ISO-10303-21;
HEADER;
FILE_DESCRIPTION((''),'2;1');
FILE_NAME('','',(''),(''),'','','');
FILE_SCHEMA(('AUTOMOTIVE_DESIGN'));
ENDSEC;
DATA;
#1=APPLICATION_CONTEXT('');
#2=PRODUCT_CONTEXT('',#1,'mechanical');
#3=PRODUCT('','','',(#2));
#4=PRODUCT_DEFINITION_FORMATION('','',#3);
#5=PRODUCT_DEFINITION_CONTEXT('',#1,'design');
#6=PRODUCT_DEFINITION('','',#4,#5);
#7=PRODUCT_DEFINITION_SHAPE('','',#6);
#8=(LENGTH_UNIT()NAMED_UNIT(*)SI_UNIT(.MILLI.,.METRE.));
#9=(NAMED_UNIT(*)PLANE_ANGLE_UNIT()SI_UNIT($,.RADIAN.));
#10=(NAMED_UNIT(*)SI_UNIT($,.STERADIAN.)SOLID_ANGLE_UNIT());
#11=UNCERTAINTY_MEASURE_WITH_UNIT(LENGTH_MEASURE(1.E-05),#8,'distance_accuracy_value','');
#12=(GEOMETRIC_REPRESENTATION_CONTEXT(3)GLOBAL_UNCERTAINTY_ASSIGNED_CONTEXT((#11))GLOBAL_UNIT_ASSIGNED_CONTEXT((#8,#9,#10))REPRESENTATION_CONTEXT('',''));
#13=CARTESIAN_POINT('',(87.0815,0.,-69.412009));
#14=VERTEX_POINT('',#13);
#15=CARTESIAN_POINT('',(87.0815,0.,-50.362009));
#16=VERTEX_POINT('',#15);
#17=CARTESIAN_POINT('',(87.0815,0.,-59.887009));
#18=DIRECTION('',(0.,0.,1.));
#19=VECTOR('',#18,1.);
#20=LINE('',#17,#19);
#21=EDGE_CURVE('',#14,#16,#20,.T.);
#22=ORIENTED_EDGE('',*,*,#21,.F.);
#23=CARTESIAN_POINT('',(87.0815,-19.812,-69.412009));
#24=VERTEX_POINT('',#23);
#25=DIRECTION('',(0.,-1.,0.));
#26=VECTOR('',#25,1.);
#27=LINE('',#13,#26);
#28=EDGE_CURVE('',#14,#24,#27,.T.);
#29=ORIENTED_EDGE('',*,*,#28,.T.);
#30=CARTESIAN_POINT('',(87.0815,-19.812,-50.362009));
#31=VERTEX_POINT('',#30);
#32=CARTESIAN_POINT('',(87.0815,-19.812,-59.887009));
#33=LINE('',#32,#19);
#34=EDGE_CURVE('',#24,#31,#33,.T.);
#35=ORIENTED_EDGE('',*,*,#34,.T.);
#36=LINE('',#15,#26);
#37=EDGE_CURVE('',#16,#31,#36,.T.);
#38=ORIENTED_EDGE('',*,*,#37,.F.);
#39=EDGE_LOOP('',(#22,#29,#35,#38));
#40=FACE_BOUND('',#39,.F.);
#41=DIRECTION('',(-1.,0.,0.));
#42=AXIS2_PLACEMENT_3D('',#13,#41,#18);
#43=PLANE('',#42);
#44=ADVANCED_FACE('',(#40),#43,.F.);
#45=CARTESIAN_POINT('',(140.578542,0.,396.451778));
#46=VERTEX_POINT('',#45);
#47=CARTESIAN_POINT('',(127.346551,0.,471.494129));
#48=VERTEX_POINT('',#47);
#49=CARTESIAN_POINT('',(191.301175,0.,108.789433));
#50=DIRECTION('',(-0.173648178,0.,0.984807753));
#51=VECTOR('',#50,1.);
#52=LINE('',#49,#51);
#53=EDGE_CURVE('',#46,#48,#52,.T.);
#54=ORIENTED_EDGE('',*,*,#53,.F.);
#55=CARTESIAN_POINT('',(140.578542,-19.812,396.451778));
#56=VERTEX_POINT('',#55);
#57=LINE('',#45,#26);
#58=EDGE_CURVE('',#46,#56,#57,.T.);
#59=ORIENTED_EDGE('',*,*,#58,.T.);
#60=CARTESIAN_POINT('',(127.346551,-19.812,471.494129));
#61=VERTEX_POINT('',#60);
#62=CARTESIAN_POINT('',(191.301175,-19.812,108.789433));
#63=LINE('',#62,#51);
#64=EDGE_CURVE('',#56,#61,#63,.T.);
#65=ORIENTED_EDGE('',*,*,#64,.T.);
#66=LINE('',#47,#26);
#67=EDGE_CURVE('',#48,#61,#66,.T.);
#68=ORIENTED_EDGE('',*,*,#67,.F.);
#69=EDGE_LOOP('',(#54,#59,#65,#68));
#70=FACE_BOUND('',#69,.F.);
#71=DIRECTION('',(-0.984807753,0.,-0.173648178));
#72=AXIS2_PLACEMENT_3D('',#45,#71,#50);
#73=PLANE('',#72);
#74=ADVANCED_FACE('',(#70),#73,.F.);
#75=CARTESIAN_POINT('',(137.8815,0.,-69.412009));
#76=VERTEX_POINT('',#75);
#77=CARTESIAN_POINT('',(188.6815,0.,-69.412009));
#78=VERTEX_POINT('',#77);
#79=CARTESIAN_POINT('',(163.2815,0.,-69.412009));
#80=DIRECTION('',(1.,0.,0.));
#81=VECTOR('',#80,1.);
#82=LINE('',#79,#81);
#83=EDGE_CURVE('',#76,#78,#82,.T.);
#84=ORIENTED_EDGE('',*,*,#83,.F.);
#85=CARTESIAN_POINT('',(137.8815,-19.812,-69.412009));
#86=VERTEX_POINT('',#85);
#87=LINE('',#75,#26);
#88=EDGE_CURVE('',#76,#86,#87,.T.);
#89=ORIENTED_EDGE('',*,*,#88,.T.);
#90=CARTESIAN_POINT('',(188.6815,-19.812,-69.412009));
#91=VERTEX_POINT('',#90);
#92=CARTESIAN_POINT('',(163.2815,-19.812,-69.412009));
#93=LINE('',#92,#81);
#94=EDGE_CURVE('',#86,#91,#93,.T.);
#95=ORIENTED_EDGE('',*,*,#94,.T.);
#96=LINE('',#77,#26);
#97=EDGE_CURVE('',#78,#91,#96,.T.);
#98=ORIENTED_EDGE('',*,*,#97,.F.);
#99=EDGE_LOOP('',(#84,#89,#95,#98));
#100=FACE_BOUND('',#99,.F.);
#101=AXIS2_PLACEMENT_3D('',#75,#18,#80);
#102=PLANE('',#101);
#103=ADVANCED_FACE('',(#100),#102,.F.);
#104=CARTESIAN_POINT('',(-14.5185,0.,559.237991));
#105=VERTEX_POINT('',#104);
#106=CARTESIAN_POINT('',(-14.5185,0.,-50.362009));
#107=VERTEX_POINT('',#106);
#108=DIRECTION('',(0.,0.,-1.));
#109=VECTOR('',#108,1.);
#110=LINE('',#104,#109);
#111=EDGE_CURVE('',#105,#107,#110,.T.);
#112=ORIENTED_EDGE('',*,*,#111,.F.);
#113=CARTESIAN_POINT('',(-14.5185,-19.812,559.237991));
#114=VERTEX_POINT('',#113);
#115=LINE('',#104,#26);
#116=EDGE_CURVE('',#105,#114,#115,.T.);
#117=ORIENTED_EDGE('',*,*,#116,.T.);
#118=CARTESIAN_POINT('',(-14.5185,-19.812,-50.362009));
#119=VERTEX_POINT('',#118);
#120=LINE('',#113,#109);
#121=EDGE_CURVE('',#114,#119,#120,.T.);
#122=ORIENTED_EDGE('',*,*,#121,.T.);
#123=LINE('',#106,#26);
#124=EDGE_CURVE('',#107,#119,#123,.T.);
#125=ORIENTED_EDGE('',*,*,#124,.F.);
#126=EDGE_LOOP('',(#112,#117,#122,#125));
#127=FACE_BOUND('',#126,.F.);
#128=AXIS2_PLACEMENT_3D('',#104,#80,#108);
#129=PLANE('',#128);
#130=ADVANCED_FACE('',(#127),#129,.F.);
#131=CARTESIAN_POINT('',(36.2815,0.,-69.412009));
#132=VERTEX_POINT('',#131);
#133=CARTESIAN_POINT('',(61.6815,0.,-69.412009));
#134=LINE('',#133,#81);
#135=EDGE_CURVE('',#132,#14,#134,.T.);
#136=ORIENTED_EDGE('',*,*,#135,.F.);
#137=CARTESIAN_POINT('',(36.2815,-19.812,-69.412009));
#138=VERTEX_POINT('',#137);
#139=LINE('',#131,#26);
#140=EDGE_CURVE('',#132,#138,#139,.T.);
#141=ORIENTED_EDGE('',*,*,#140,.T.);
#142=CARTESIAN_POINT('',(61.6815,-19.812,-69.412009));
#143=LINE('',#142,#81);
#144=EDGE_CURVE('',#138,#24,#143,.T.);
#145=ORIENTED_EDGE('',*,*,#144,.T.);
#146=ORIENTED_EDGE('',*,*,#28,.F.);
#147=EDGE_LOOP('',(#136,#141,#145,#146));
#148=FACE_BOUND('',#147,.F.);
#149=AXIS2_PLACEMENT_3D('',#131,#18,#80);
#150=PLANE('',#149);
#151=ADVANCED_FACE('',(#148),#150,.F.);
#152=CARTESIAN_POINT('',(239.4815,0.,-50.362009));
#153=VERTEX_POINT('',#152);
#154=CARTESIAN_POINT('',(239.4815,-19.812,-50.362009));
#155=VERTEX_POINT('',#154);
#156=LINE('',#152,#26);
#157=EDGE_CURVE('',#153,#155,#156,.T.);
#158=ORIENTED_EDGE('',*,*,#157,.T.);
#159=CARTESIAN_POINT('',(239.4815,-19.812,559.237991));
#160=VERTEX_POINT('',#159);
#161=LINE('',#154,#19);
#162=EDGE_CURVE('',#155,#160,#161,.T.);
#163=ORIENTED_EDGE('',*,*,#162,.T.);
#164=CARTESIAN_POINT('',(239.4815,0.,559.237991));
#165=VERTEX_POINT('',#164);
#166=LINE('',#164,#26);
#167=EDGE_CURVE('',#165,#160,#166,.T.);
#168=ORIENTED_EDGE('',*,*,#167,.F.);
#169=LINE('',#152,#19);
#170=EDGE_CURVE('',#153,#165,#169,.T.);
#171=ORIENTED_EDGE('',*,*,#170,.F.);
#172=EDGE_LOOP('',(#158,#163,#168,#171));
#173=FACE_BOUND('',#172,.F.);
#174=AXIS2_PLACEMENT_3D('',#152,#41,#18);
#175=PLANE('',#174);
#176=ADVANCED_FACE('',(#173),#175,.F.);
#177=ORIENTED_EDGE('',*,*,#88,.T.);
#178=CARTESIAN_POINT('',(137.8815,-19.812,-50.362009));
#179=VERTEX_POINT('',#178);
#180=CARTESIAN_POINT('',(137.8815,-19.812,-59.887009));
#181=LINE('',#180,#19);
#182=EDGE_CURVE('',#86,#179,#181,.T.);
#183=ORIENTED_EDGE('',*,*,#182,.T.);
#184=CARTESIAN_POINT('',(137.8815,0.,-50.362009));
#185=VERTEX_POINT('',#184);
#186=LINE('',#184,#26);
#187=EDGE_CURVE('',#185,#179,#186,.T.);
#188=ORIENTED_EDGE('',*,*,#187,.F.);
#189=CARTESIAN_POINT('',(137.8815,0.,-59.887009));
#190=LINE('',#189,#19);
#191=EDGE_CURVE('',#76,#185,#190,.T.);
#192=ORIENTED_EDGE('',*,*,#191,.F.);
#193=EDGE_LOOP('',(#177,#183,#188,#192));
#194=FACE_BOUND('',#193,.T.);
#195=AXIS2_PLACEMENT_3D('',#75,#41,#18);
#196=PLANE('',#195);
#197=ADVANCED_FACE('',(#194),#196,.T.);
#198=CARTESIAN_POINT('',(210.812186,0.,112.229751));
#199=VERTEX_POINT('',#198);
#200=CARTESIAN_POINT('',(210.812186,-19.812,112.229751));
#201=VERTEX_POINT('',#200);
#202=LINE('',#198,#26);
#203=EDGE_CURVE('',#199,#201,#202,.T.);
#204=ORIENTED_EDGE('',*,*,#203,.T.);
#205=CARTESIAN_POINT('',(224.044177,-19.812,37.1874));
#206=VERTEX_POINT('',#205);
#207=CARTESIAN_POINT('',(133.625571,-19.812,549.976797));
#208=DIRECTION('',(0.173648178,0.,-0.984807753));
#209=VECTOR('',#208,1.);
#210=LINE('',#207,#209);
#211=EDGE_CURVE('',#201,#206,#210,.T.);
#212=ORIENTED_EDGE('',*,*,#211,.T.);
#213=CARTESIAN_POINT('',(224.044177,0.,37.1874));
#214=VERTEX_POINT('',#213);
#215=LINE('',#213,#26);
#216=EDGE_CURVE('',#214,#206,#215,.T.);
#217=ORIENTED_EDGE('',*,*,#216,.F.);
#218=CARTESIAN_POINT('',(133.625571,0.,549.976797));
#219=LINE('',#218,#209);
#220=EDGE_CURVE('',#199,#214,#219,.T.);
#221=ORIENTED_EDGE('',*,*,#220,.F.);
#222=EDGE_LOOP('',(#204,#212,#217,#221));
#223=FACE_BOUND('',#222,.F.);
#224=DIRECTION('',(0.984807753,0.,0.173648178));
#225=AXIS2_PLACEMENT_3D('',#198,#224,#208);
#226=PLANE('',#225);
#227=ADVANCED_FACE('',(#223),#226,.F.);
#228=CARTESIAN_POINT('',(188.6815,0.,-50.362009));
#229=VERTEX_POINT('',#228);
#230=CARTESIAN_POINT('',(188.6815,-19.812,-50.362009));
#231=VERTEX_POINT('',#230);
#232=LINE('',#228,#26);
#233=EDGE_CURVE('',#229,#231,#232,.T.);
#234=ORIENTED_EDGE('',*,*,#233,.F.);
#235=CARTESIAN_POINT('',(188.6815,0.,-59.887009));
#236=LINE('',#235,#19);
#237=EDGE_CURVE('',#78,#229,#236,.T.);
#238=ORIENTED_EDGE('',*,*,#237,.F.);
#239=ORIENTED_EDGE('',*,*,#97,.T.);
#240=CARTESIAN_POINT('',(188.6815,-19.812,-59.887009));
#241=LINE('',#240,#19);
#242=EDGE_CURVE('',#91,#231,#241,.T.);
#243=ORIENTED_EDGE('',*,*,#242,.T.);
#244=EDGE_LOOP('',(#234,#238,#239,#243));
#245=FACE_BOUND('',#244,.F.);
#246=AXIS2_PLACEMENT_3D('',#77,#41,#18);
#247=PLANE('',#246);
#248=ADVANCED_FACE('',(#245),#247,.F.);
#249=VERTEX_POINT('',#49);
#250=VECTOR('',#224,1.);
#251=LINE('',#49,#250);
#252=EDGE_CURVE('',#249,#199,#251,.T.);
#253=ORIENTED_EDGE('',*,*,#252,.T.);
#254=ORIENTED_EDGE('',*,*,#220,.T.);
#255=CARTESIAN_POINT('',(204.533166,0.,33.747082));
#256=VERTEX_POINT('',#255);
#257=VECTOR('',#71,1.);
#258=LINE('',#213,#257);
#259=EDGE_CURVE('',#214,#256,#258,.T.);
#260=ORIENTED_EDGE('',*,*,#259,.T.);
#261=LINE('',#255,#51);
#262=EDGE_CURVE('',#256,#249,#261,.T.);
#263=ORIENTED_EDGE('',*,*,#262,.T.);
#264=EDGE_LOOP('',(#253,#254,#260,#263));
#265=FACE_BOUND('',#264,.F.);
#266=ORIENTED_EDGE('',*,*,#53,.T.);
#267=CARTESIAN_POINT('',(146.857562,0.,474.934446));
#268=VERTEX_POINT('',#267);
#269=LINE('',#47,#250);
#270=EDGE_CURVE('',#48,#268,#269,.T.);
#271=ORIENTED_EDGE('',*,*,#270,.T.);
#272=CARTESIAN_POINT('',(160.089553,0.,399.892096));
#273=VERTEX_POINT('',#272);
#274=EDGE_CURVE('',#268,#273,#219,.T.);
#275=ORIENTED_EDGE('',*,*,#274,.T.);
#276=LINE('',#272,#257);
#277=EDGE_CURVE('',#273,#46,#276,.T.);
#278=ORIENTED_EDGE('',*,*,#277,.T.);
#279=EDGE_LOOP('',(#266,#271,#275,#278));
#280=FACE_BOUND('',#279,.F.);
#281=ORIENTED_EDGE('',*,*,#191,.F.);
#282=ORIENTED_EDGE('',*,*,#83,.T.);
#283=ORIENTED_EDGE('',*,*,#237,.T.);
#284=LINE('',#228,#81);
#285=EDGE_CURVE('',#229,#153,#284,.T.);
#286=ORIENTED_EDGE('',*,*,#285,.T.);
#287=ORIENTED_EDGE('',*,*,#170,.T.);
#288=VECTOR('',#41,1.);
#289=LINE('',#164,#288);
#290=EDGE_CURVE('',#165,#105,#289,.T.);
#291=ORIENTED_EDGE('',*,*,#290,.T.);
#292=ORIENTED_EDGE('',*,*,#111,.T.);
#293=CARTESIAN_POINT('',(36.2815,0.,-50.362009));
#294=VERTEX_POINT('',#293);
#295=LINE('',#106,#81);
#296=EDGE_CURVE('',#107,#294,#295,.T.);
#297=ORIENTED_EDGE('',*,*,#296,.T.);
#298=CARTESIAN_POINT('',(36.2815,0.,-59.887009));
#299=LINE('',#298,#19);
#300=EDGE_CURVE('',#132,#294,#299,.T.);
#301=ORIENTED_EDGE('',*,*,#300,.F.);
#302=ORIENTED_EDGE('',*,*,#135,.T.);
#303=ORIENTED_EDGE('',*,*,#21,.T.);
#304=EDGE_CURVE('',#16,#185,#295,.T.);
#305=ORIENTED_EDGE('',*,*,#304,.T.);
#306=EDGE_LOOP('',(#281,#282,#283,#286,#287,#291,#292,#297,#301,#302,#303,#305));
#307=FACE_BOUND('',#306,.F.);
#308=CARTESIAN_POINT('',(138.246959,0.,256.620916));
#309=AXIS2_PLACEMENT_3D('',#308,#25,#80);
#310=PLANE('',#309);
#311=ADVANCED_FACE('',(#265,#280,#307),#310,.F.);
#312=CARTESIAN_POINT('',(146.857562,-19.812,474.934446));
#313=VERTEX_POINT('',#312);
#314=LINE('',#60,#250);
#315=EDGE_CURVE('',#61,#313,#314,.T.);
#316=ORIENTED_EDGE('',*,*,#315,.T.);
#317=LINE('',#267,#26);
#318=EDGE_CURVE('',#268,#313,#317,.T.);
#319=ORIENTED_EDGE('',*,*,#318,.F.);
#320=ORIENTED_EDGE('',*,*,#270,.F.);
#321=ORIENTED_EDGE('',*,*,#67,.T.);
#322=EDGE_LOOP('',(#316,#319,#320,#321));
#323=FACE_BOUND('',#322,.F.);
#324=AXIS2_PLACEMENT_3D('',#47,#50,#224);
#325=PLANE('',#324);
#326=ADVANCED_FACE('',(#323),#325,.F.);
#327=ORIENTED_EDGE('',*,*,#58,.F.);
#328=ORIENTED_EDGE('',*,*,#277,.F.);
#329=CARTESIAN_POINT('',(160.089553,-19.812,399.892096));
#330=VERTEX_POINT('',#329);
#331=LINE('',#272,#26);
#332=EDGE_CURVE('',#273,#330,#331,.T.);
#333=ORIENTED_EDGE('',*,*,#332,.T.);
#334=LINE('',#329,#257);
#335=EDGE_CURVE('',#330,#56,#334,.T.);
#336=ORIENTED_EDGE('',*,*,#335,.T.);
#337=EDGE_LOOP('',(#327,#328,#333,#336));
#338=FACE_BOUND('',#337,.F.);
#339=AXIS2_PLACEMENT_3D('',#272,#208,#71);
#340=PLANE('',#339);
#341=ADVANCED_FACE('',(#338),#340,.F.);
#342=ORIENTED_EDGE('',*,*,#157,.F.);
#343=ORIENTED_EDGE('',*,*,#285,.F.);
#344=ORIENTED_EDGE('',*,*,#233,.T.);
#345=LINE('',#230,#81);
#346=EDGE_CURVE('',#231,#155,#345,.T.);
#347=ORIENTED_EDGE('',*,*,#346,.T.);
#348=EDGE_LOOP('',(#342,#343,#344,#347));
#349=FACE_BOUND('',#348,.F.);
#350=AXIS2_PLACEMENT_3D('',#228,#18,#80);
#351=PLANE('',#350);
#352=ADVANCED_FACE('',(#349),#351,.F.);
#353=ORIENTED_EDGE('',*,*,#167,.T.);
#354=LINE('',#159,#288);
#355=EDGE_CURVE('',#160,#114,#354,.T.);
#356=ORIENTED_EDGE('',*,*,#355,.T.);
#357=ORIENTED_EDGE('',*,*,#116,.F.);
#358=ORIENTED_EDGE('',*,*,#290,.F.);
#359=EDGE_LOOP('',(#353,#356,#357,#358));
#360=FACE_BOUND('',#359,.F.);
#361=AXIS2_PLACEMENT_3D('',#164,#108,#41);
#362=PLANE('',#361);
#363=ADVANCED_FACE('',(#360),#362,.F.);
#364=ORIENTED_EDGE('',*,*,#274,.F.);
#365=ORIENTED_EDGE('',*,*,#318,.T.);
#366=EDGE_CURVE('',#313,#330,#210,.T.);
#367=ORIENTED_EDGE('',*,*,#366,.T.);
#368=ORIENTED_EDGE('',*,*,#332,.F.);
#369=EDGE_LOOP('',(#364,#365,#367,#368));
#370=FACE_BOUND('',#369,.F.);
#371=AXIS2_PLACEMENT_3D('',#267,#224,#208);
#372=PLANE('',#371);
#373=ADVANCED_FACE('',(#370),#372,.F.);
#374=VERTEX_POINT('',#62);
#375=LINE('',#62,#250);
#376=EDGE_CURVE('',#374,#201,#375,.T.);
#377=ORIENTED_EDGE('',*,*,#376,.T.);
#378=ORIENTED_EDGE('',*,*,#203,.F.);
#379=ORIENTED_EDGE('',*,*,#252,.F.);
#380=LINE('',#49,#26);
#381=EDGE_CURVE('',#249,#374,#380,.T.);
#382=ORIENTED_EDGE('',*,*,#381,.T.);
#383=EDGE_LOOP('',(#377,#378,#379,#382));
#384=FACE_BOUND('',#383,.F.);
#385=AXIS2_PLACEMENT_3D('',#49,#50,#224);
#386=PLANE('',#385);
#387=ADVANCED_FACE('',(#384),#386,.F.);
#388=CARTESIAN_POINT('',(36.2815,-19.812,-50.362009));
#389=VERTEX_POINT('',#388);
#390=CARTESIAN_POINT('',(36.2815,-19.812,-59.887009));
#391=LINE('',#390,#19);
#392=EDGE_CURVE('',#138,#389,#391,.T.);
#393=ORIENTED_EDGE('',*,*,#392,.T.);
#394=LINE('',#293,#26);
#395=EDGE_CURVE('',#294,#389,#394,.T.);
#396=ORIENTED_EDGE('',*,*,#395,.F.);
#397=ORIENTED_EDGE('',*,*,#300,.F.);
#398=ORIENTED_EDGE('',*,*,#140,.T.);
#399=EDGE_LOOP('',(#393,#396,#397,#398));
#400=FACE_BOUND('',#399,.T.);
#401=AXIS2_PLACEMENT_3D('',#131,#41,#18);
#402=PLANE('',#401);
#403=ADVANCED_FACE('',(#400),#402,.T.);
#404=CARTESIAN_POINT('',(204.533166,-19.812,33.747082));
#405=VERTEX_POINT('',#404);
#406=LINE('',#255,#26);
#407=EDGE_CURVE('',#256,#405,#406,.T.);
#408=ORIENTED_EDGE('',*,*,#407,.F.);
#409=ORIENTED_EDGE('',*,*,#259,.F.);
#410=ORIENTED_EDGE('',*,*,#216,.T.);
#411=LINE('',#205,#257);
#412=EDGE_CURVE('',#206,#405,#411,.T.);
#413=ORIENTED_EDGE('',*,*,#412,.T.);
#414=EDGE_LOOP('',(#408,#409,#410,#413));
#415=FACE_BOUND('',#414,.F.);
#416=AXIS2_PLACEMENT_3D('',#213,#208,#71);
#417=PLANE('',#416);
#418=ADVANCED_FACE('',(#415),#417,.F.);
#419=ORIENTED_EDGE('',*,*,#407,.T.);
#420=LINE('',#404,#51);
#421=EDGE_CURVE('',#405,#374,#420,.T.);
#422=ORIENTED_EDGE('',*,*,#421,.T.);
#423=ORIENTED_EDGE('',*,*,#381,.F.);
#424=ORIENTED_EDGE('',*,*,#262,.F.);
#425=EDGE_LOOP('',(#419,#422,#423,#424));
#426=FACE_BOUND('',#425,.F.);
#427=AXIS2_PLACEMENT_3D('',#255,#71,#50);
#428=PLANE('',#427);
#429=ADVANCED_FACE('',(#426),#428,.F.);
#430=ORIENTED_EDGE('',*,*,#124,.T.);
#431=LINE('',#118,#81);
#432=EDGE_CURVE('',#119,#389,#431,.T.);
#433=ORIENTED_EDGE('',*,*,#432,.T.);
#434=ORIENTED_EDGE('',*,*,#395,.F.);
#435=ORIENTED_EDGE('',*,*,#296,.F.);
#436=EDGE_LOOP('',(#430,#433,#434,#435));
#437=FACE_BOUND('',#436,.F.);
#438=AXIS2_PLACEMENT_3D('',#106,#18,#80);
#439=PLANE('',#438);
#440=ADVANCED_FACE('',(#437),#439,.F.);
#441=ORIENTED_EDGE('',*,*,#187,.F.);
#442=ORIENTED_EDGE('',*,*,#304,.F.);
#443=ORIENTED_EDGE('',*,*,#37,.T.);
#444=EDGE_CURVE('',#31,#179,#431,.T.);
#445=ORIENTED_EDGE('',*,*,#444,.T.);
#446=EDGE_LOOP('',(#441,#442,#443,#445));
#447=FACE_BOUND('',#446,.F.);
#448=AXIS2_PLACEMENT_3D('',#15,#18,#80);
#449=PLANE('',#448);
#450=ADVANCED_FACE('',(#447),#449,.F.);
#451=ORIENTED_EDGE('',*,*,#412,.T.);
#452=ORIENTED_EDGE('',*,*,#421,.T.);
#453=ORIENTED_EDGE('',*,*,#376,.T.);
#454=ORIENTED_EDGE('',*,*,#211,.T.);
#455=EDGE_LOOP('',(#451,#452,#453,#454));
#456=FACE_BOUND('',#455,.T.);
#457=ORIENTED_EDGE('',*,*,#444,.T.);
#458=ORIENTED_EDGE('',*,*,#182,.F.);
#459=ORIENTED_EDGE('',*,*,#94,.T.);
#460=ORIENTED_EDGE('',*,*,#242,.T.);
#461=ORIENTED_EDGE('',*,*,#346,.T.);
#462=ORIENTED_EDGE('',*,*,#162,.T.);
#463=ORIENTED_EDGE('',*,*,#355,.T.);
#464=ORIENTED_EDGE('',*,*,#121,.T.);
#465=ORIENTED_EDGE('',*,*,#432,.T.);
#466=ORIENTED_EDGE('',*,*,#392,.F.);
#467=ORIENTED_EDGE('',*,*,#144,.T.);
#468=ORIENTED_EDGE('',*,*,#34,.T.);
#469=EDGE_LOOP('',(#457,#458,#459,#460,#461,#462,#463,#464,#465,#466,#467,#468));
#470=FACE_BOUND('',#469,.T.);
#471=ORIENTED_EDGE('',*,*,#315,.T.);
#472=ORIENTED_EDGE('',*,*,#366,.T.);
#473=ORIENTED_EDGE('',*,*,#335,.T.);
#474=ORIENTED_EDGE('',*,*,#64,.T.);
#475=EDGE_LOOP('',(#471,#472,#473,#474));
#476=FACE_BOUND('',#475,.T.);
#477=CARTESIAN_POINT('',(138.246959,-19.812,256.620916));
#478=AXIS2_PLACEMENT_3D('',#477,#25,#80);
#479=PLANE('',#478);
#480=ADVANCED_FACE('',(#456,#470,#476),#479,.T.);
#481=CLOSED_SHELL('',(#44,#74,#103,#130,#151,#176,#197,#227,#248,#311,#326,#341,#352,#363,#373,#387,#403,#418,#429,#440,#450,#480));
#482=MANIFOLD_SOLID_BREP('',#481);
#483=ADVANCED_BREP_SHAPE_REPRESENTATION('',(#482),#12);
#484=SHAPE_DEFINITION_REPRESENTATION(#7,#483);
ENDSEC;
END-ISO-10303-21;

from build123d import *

# Parameters (mm, degrees)
F0_W     = 50.8
F0_H     = 19.05
F1_DEPTH = 19.812


# Not quite as in the source:
# - a feature names something its author has since deleted; it is built from what else it names


with BuildPart() as f1:
    # F0 (on Front) → F1 (new body)
    with BuildSketch(Plane.XZ):
        Polygon((239.4815002712, 559.237990855), (-14.5184997288, 559.237990855), (-14.5184997288, -50.362009145), (36.2815002712, -50.362009145), (87.0815002712, -50.362009145), (137.8815002712, -50.362009145), (188.6815002712, -50.362009145), (219.3638682365, -50.362009145), (204.533166074, 33.7470824019), (191.3011749357, 108.7894331814), (140.5785422392, 396.4517778362), (127.346551101, 471.4941286158), (113.5079391308, 549.9767970912), (133.6255711655, 549.9767970912), (146.8575623037, 474.9344463117), (160.0895534419, 399.8920955322), (210.8121861384, 112.2297508773), (224.0441772766, 37.1874000978), (239.4815002712, -50.362009145), align=None)
        with Locations((61.6815002712, -59.887009145)):
            Rectangle(F0_W, F0_H)
        with Locations((163.2815002712, -59.887009145)):
            Rectangle(F0_W, F0_H)
        Polygon((127.346551101, 471.4941286158), (146.8575623037, 474.9344463117), (133.6255711655, 549.9767970912), (113.5079391308, 549.9767970912), align=None)
        Polygon((219.3638682365, -50.362009145), (239.4815002712, -50.362009145), (224.0441772766, 37.1874000978), (204.533166074, 33.7470824019), align=None)
        Polygon((191.3011749357, 108.7894331814), (210.8121861384, 112.2297508773), (160.0895534419, 399.8920955322), (140.5785422392, 396.4517778362), align=None)
    extrude(amount=F1_DEPTH)


solid = f1.part
